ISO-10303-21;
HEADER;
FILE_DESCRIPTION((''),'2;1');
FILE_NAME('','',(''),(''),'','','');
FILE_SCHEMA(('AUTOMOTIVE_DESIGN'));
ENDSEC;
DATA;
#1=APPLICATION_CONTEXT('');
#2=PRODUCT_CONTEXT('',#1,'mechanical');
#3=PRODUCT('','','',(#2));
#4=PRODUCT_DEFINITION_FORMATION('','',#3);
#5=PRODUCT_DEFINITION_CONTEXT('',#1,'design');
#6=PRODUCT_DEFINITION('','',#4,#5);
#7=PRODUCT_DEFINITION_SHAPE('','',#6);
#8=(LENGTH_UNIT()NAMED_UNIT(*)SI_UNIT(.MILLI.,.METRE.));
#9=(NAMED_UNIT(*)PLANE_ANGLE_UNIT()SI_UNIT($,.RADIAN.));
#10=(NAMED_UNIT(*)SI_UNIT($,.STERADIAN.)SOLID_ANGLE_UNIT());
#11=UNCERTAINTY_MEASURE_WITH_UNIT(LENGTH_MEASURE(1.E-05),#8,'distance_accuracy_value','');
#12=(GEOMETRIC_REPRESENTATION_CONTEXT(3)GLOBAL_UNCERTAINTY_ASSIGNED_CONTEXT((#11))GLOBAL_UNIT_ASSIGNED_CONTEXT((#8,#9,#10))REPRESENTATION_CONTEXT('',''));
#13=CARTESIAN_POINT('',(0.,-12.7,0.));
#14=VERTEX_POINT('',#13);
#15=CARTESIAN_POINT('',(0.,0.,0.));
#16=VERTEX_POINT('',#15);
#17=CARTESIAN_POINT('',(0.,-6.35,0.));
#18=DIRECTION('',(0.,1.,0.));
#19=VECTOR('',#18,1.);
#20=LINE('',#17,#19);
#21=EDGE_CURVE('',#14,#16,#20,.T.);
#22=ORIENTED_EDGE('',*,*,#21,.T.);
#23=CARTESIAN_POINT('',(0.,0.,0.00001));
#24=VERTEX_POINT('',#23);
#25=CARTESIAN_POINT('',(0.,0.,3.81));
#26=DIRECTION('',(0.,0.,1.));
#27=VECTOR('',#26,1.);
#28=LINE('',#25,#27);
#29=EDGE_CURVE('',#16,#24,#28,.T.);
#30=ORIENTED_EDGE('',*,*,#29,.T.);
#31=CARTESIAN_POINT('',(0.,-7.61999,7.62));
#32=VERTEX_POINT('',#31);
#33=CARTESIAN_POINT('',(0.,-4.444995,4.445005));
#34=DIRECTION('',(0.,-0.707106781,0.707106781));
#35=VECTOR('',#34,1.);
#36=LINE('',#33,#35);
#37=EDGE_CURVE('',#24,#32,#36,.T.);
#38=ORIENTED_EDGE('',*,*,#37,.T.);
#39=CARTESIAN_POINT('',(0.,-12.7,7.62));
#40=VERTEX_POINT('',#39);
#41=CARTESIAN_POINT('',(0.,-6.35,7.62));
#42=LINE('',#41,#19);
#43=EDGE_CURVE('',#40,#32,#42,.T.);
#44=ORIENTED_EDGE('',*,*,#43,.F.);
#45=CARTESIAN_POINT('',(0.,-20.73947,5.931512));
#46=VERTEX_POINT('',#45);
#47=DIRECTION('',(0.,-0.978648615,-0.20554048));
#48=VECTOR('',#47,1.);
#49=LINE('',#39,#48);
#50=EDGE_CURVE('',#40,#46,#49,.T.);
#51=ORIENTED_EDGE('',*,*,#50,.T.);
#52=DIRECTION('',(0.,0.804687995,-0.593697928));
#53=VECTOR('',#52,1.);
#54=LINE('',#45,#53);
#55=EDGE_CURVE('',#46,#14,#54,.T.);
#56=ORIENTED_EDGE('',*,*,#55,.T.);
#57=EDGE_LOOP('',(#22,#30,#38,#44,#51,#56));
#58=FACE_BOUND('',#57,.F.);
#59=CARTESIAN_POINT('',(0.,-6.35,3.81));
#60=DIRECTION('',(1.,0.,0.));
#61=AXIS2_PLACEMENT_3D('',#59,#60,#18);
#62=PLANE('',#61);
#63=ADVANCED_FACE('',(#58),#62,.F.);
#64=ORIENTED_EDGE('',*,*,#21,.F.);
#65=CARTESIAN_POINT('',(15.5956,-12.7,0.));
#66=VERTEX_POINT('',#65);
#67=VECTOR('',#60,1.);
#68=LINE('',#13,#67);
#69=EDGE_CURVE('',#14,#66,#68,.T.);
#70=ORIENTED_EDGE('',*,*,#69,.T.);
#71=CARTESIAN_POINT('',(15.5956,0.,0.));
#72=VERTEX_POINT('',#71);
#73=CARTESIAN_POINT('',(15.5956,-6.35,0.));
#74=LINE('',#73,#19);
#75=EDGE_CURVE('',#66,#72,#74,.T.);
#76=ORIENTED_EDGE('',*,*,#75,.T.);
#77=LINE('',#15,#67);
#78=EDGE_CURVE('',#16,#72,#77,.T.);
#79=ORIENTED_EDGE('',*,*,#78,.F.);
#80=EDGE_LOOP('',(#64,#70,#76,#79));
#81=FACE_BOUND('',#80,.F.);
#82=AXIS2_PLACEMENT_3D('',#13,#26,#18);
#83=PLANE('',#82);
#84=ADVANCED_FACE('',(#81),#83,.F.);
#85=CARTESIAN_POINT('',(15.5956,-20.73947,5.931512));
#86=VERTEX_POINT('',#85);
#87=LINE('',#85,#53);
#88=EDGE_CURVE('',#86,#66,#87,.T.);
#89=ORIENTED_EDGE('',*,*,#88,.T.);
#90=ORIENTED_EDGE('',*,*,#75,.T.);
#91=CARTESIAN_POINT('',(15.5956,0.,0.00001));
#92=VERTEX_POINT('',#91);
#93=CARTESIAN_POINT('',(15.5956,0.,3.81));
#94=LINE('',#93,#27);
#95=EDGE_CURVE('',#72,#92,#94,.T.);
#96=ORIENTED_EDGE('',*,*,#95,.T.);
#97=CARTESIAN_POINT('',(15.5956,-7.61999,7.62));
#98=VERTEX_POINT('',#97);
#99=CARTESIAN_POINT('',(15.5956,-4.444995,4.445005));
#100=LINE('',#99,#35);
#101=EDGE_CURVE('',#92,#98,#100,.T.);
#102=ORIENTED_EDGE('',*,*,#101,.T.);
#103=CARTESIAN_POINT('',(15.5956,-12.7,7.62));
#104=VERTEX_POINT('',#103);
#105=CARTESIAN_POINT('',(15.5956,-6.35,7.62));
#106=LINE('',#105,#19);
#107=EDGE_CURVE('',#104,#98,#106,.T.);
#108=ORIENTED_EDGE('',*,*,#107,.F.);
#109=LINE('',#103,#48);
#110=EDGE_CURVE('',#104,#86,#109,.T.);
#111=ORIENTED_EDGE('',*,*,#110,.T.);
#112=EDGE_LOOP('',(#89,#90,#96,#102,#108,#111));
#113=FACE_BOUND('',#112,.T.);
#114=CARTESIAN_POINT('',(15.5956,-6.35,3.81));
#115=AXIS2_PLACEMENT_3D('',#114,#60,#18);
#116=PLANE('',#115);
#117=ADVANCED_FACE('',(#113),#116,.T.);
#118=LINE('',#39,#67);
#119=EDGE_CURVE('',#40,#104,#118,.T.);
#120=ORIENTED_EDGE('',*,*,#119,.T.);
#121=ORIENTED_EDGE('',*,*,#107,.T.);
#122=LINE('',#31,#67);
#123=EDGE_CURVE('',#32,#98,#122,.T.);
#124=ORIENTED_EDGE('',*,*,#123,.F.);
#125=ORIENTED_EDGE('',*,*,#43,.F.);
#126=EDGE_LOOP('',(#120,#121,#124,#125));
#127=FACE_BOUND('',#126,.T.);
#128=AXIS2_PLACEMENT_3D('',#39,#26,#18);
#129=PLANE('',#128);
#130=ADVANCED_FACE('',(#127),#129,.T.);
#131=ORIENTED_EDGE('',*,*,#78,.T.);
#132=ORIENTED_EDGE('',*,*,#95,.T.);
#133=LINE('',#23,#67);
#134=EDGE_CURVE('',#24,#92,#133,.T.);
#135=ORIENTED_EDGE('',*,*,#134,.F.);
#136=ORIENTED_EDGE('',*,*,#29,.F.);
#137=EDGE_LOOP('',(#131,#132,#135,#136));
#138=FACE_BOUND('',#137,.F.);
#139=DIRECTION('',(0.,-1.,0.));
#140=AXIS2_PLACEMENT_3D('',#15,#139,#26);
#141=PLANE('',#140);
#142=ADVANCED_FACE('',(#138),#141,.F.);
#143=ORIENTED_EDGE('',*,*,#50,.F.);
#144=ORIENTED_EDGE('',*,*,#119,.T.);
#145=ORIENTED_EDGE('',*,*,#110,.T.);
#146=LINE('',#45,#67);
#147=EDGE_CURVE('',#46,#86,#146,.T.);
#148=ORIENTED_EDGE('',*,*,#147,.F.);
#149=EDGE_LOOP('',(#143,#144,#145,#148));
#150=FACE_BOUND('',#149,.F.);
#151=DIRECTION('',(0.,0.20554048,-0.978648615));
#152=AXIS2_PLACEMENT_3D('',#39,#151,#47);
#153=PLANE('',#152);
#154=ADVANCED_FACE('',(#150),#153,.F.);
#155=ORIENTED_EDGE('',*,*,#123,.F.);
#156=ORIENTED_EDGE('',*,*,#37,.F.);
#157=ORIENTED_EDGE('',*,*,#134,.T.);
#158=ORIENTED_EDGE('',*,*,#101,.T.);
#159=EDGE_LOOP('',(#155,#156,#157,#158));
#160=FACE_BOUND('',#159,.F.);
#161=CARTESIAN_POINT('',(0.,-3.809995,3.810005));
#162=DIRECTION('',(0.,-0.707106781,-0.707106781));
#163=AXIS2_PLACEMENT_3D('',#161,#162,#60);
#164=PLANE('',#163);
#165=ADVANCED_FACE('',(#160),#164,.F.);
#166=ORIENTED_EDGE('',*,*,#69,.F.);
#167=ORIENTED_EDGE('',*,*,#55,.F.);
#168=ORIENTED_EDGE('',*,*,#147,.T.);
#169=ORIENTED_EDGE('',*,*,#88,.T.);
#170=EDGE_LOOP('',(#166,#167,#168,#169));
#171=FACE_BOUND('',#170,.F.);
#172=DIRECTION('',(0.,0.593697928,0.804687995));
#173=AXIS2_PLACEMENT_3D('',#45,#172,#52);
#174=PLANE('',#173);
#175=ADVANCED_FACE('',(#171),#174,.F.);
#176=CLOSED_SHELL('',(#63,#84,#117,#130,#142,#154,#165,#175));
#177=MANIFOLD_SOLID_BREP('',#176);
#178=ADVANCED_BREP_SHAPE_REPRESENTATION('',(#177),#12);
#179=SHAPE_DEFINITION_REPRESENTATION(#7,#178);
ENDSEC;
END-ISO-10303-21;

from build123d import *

# Parameters (mm, degrees)
F0_W     = 12.7
F0_H     = 7.62
F1_DEPTH = 15.5956
F2_SIZE  = 7.61999


# Not quite as in the source:
# - a fillet or chamfer is up to 0.001 mm smaller than in the source, because OpenCascade refuses the exact size


with BuildPart() as f1:
    # F0 (on Right) → F1 (new body)
    with BuildSketch(Plane.YZ):
        with Locations((-6.35, 3.81)):
            Rectangle(F0_W, F0_H)
        Polygon((-20.7394696772, 5.931511987), (-12.7, 0), (-12.7, 7.62), align=None)
    extrude(amount=F1_DEPTH)

    # F2 (size 7.62 in the source; OpenCascade refuses exactly that, so slightly less here)
    f2_edges = [f1.edges().sort_by_distance(p)[0] for p in [
        (7.7978, 0, 7.62),
    ]]
    chamfer(f2_edges, length=F2_SIZE)


solid = f1.part
